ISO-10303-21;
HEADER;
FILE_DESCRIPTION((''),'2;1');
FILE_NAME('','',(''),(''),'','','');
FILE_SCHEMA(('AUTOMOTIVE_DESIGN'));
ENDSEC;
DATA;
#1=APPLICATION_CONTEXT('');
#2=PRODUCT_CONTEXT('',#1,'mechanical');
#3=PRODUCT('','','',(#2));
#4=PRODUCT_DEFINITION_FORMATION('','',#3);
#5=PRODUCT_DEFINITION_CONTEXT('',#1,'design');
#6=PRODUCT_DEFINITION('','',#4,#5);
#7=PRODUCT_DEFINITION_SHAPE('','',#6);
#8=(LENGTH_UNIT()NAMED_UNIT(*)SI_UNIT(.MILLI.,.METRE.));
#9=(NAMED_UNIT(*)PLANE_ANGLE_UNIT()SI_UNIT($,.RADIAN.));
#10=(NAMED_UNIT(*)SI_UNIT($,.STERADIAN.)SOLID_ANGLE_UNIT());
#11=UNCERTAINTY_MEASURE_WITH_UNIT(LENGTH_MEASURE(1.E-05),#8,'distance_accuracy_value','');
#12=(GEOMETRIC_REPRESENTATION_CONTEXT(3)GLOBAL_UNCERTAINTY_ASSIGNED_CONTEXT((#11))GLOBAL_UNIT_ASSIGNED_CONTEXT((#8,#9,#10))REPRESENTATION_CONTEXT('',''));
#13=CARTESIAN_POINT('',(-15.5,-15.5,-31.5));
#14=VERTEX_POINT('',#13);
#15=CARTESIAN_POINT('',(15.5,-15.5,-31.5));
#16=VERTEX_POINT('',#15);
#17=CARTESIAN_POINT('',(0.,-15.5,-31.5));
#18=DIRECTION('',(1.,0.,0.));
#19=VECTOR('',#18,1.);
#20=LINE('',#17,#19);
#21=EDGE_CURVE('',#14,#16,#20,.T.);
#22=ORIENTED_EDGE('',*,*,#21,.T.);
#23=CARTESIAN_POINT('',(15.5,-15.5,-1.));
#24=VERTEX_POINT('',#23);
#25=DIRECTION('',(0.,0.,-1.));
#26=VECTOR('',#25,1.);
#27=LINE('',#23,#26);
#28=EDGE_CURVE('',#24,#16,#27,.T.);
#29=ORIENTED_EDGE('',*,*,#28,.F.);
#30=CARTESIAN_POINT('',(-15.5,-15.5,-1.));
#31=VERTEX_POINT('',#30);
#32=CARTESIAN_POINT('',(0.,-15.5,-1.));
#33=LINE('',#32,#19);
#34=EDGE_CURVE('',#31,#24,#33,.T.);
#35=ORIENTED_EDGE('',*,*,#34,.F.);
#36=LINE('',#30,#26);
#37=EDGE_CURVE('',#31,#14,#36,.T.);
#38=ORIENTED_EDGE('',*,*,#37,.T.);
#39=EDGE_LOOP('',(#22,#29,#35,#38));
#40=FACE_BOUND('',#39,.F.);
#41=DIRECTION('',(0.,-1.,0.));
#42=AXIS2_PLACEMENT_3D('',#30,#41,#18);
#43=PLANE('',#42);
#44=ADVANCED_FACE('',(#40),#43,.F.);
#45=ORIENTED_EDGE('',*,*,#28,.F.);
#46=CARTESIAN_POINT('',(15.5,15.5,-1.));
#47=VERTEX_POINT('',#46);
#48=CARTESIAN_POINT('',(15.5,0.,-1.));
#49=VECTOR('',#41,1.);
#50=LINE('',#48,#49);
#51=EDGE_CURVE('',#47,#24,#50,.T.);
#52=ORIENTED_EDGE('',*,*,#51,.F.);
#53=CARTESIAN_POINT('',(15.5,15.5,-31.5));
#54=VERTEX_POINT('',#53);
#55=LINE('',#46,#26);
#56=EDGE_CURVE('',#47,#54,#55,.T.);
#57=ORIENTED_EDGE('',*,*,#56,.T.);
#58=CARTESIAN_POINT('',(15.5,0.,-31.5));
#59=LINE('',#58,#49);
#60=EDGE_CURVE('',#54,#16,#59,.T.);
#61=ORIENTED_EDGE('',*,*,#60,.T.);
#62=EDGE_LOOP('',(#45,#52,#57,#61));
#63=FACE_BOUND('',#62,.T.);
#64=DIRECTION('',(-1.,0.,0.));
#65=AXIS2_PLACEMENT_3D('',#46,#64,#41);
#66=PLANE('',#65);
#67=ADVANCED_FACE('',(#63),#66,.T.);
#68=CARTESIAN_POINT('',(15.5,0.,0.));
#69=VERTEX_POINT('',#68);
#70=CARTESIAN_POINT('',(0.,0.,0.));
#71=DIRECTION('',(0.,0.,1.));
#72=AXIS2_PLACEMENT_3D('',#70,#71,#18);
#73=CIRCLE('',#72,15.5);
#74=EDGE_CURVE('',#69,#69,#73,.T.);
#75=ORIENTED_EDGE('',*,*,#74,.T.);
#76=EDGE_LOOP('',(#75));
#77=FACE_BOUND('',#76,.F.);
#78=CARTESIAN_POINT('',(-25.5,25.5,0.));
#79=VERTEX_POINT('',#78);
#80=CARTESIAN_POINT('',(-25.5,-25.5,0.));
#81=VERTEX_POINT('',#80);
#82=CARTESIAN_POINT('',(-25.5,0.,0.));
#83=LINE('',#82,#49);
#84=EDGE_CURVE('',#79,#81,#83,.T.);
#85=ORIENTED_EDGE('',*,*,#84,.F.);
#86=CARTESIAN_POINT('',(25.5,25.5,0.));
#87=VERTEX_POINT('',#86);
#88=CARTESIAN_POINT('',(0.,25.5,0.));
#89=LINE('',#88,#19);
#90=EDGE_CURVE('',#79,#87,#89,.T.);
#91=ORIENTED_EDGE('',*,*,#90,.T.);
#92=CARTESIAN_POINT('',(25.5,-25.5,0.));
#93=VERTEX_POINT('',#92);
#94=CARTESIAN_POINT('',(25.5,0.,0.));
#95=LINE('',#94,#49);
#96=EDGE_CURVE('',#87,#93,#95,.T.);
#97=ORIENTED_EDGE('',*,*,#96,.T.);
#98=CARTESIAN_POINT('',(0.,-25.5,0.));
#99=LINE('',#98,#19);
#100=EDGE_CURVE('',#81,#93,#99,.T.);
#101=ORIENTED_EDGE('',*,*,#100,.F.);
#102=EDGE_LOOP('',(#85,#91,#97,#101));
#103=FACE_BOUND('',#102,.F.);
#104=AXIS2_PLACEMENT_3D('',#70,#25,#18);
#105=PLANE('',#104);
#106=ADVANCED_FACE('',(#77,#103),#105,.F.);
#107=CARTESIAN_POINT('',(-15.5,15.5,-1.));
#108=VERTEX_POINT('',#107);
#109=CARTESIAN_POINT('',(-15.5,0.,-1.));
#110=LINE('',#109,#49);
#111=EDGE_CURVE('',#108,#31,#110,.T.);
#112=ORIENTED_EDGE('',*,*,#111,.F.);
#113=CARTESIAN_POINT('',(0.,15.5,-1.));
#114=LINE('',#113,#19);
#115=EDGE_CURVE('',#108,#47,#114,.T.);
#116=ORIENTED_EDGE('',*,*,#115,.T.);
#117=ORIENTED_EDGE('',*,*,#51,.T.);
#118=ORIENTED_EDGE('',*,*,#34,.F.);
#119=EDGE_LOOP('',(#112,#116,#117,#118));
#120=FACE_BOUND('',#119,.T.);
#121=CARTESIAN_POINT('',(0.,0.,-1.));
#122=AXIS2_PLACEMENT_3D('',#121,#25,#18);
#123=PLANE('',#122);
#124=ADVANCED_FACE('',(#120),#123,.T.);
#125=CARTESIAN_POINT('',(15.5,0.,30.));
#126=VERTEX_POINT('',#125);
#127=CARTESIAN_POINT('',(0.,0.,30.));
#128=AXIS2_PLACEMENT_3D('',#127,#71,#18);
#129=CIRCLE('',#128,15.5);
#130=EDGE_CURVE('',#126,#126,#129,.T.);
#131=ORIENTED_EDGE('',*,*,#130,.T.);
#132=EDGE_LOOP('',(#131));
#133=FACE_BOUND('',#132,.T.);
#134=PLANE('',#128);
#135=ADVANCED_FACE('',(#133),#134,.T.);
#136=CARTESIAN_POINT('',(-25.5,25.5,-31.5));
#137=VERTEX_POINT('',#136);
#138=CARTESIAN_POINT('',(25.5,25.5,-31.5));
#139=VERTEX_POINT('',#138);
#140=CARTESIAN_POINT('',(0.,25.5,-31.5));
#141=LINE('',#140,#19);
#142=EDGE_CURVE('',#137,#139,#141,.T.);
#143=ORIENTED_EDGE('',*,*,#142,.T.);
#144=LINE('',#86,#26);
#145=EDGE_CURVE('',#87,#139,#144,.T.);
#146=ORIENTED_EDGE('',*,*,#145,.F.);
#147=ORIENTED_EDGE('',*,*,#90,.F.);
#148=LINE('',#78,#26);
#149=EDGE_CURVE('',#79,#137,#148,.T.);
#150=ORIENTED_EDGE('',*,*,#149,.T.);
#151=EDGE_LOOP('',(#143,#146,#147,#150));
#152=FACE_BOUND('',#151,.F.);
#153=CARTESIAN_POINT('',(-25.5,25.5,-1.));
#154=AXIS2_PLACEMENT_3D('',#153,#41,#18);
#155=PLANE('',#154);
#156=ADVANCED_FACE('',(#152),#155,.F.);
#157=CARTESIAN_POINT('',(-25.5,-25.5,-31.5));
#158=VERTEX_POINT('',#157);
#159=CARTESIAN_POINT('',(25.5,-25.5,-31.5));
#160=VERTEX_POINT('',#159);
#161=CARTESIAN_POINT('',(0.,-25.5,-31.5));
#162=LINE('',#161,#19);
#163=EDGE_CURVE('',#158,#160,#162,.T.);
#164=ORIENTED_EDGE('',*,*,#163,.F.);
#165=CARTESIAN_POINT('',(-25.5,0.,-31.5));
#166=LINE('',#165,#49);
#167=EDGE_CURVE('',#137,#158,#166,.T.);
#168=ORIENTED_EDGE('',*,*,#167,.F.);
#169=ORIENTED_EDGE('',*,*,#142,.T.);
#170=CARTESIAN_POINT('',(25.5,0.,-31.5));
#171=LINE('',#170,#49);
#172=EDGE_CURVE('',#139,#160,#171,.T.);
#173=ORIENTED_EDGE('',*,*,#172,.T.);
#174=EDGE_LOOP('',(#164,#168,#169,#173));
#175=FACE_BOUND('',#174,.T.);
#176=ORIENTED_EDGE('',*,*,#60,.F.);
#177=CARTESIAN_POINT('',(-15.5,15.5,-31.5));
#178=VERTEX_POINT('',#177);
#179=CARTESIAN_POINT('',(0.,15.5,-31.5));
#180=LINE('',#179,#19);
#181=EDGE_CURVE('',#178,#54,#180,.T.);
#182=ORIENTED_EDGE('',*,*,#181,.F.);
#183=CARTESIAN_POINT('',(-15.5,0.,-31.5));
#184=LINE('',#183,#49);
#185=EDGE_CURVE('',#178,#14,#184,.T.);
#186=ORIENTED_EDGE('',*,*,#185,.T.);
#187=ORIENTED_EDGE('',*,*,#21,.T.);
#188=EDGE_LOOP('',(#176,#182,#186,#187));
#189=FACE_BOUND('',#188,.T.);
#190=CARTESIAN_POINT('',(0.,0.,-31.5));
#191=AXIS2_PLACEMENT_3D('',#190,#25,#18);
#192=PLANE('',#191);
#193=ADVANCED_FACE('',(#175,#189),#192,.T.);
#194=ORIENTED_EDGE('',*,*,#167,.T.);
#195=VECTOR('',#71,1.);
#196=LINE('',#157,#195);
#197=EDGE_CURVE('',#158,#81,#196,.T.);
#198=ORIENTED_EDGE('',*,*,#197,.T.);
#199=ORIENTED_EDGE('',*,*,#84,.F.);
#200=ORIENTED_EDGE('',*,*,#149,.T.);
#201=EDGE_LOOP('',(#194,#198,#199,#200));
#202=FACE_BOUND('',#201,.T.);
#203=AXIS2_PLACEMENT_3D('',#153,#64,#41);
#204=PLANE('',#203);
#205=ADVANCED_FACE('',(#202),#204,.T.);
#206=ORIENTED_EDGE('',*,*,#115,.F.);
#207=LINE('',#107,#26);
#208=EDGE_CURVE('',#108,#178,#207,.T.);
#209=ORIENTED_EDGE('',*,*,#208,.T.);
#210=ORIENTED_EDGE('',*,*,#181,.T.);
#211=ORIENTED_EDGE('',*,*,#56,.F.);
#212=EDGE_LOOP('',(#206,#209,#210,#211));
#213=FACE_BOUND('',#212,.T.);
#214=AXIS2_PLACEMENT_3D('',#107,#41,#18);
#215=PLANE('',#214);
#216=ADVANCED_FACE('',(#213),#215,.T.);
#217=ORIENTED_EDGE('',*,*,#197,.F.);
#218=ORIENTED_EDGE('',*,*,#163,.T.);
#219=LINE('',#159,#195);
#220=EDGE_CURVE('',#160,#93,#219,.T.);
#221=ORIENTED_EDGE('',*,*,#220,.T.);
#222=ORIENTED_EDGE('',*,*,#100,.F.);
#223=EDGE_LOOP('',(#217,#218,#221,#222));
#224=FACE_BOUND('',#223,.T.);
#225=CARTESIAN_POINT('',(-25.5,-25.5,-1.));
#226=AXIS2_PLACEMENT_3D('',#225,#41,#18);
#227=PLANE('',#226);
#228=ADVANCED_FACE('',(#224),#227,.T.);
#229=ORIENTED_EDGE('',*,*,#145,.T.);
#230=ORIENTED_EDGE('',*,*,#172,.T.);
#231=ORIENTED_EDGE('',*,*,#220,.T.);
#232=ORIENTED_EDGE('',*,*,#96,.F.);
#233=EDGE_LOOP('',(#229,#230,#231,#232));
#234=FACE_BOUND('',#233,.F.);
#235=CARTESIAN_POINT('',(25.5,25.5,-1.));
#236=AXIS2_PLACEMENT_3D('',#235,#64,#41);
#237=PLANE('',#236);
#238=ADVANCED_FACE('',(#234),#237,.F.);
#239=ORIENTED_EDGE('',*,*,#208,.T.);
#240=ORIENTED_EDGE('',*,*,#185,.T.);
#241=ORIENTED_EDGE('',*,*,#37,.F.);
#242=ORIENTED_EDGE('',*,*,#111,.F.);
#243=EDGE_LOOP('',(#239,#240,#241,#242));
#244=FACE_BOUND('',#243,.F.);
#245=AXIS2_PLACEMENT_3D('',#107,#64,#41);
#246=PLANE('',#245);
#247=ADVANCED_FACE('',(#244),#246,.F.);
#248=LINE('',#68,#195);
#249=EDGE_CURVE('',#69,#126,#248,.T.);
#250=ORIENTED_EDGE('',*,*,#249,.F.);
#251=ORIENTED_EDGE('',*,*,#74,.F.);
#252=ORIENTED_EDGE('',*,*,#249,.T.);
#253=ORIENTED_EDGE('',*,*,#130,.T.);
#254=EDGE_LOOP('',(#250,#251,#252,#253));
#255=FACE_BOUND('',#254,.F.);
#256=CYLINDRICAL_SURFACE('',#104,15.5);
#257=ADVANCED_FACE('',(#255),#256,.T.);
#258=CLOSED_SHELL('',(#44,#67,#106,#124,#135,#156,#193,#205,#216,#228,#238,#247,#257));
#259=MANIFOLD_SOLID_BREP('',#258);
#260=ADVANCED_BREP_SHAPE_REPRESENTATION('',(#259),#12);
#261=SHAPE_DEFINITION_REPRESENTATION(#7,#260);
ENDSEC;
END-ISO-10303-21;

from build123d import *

# Parameters (mm, degrees)
F0_R     = 15.5
F1_DEPTH = 30
F2_W     = 51
F2_H     = 51
F3_DEPTH = 1
F4_W     = 51
F4_H     = 51
F4_W_2   = 31
F4_H_2   = 31
F5_DEPTH = 30.5


with BuildPart() as f1:
    # F0 (on Top) → F1 (new body)
    with BuildSketch(Plane.XY):
        Circle(F0_R)
    extrude(amount=F1_DEPTH)

    # F2 (on face) → F3 (join)
    with BuildSketch(Plane(origin=(0, 0, 0), x_dir=(1, 0, 0), z_dir=(0, 0, -1))):
        Rectangle(F2_W, F2_H)
        Polygon((15.5, 0), (15.5, -15.5), (0, -15.5), (-15.5, -15.5), (-15.5, 0), (-15.5, 15.5), (-6.64e-08, 15.5), (15.5, 15.5), align=None, mode=Mode.SUBTRACT)
        with BuildLine():
            Line((0, -15.5), (15.5, -15.5))
            Line((15.5, -15.5), (15.5, 0))
            ThreePointArc((15.5, 0), (10.9601551084, -10.9601551084), (0, -15.5))
        make_face()
        with BuildLine():
            Line((-15.5, -15.5), (0, -15.5))
            ThreePointArc((0, -15.5), (-10.9601551084, -10.9601551084), (-15.5, 0))
            Line((-15.5, 0), (-15.5, -15.5))
        make_face()
        with BuildLine():
            ThreePointArc((-15.5, 0), (-10.9601551084, -10.9601551084), (0, -15.5))
            ThreePointArc((0, -15.5), (10.9601551084, -10.9601551084), (15.5, 0))
            ThreePointArc((15.5, 0), (10.9601550849, 10.9601551319), (-6.64e-08, 15.5))
            ThreePointArc((-6.64e-08, 15.5), (-10.9601551319, 10.9601550849), (-15.5, 0))
        make_face()
        with BuildLine():
            ThreePointArc((-6.64e-08, 15.5), (10.9601550849, 10.9601551319), (15.5, 0))
            Line((15.5, 0), (15.5, 15.5))
            Line((15.5, 15.5), (-6.64e-08, 15.5))
        make_face()
        with BuildLine():
            Line((-15.5, 15.5), (-15.5, 0))
            ThreePointArc((-15.5, 0), (-10.9601551319, 10.9601550849), (-6.64e-08, 15.5))
            Line((-6.64e-08, 15.5), (-15.5, 15.5))
        make_face()
    extrude(amount=F3_DEPTH)

    # F4 (on face) → F5 (join)
    with BuildSketch(Plane(origin=(0, 0, -1), x_dir=(1, 0, 0), z_dir=(0, 0, -1))):
        Rectangle(F4_W, F4_H)
        Rectangle(F4_W_2, F4_H_2, mode=Mode.SUBTRACT)
    extrude(amount=F5_DEPTH)


solid = f1.part
